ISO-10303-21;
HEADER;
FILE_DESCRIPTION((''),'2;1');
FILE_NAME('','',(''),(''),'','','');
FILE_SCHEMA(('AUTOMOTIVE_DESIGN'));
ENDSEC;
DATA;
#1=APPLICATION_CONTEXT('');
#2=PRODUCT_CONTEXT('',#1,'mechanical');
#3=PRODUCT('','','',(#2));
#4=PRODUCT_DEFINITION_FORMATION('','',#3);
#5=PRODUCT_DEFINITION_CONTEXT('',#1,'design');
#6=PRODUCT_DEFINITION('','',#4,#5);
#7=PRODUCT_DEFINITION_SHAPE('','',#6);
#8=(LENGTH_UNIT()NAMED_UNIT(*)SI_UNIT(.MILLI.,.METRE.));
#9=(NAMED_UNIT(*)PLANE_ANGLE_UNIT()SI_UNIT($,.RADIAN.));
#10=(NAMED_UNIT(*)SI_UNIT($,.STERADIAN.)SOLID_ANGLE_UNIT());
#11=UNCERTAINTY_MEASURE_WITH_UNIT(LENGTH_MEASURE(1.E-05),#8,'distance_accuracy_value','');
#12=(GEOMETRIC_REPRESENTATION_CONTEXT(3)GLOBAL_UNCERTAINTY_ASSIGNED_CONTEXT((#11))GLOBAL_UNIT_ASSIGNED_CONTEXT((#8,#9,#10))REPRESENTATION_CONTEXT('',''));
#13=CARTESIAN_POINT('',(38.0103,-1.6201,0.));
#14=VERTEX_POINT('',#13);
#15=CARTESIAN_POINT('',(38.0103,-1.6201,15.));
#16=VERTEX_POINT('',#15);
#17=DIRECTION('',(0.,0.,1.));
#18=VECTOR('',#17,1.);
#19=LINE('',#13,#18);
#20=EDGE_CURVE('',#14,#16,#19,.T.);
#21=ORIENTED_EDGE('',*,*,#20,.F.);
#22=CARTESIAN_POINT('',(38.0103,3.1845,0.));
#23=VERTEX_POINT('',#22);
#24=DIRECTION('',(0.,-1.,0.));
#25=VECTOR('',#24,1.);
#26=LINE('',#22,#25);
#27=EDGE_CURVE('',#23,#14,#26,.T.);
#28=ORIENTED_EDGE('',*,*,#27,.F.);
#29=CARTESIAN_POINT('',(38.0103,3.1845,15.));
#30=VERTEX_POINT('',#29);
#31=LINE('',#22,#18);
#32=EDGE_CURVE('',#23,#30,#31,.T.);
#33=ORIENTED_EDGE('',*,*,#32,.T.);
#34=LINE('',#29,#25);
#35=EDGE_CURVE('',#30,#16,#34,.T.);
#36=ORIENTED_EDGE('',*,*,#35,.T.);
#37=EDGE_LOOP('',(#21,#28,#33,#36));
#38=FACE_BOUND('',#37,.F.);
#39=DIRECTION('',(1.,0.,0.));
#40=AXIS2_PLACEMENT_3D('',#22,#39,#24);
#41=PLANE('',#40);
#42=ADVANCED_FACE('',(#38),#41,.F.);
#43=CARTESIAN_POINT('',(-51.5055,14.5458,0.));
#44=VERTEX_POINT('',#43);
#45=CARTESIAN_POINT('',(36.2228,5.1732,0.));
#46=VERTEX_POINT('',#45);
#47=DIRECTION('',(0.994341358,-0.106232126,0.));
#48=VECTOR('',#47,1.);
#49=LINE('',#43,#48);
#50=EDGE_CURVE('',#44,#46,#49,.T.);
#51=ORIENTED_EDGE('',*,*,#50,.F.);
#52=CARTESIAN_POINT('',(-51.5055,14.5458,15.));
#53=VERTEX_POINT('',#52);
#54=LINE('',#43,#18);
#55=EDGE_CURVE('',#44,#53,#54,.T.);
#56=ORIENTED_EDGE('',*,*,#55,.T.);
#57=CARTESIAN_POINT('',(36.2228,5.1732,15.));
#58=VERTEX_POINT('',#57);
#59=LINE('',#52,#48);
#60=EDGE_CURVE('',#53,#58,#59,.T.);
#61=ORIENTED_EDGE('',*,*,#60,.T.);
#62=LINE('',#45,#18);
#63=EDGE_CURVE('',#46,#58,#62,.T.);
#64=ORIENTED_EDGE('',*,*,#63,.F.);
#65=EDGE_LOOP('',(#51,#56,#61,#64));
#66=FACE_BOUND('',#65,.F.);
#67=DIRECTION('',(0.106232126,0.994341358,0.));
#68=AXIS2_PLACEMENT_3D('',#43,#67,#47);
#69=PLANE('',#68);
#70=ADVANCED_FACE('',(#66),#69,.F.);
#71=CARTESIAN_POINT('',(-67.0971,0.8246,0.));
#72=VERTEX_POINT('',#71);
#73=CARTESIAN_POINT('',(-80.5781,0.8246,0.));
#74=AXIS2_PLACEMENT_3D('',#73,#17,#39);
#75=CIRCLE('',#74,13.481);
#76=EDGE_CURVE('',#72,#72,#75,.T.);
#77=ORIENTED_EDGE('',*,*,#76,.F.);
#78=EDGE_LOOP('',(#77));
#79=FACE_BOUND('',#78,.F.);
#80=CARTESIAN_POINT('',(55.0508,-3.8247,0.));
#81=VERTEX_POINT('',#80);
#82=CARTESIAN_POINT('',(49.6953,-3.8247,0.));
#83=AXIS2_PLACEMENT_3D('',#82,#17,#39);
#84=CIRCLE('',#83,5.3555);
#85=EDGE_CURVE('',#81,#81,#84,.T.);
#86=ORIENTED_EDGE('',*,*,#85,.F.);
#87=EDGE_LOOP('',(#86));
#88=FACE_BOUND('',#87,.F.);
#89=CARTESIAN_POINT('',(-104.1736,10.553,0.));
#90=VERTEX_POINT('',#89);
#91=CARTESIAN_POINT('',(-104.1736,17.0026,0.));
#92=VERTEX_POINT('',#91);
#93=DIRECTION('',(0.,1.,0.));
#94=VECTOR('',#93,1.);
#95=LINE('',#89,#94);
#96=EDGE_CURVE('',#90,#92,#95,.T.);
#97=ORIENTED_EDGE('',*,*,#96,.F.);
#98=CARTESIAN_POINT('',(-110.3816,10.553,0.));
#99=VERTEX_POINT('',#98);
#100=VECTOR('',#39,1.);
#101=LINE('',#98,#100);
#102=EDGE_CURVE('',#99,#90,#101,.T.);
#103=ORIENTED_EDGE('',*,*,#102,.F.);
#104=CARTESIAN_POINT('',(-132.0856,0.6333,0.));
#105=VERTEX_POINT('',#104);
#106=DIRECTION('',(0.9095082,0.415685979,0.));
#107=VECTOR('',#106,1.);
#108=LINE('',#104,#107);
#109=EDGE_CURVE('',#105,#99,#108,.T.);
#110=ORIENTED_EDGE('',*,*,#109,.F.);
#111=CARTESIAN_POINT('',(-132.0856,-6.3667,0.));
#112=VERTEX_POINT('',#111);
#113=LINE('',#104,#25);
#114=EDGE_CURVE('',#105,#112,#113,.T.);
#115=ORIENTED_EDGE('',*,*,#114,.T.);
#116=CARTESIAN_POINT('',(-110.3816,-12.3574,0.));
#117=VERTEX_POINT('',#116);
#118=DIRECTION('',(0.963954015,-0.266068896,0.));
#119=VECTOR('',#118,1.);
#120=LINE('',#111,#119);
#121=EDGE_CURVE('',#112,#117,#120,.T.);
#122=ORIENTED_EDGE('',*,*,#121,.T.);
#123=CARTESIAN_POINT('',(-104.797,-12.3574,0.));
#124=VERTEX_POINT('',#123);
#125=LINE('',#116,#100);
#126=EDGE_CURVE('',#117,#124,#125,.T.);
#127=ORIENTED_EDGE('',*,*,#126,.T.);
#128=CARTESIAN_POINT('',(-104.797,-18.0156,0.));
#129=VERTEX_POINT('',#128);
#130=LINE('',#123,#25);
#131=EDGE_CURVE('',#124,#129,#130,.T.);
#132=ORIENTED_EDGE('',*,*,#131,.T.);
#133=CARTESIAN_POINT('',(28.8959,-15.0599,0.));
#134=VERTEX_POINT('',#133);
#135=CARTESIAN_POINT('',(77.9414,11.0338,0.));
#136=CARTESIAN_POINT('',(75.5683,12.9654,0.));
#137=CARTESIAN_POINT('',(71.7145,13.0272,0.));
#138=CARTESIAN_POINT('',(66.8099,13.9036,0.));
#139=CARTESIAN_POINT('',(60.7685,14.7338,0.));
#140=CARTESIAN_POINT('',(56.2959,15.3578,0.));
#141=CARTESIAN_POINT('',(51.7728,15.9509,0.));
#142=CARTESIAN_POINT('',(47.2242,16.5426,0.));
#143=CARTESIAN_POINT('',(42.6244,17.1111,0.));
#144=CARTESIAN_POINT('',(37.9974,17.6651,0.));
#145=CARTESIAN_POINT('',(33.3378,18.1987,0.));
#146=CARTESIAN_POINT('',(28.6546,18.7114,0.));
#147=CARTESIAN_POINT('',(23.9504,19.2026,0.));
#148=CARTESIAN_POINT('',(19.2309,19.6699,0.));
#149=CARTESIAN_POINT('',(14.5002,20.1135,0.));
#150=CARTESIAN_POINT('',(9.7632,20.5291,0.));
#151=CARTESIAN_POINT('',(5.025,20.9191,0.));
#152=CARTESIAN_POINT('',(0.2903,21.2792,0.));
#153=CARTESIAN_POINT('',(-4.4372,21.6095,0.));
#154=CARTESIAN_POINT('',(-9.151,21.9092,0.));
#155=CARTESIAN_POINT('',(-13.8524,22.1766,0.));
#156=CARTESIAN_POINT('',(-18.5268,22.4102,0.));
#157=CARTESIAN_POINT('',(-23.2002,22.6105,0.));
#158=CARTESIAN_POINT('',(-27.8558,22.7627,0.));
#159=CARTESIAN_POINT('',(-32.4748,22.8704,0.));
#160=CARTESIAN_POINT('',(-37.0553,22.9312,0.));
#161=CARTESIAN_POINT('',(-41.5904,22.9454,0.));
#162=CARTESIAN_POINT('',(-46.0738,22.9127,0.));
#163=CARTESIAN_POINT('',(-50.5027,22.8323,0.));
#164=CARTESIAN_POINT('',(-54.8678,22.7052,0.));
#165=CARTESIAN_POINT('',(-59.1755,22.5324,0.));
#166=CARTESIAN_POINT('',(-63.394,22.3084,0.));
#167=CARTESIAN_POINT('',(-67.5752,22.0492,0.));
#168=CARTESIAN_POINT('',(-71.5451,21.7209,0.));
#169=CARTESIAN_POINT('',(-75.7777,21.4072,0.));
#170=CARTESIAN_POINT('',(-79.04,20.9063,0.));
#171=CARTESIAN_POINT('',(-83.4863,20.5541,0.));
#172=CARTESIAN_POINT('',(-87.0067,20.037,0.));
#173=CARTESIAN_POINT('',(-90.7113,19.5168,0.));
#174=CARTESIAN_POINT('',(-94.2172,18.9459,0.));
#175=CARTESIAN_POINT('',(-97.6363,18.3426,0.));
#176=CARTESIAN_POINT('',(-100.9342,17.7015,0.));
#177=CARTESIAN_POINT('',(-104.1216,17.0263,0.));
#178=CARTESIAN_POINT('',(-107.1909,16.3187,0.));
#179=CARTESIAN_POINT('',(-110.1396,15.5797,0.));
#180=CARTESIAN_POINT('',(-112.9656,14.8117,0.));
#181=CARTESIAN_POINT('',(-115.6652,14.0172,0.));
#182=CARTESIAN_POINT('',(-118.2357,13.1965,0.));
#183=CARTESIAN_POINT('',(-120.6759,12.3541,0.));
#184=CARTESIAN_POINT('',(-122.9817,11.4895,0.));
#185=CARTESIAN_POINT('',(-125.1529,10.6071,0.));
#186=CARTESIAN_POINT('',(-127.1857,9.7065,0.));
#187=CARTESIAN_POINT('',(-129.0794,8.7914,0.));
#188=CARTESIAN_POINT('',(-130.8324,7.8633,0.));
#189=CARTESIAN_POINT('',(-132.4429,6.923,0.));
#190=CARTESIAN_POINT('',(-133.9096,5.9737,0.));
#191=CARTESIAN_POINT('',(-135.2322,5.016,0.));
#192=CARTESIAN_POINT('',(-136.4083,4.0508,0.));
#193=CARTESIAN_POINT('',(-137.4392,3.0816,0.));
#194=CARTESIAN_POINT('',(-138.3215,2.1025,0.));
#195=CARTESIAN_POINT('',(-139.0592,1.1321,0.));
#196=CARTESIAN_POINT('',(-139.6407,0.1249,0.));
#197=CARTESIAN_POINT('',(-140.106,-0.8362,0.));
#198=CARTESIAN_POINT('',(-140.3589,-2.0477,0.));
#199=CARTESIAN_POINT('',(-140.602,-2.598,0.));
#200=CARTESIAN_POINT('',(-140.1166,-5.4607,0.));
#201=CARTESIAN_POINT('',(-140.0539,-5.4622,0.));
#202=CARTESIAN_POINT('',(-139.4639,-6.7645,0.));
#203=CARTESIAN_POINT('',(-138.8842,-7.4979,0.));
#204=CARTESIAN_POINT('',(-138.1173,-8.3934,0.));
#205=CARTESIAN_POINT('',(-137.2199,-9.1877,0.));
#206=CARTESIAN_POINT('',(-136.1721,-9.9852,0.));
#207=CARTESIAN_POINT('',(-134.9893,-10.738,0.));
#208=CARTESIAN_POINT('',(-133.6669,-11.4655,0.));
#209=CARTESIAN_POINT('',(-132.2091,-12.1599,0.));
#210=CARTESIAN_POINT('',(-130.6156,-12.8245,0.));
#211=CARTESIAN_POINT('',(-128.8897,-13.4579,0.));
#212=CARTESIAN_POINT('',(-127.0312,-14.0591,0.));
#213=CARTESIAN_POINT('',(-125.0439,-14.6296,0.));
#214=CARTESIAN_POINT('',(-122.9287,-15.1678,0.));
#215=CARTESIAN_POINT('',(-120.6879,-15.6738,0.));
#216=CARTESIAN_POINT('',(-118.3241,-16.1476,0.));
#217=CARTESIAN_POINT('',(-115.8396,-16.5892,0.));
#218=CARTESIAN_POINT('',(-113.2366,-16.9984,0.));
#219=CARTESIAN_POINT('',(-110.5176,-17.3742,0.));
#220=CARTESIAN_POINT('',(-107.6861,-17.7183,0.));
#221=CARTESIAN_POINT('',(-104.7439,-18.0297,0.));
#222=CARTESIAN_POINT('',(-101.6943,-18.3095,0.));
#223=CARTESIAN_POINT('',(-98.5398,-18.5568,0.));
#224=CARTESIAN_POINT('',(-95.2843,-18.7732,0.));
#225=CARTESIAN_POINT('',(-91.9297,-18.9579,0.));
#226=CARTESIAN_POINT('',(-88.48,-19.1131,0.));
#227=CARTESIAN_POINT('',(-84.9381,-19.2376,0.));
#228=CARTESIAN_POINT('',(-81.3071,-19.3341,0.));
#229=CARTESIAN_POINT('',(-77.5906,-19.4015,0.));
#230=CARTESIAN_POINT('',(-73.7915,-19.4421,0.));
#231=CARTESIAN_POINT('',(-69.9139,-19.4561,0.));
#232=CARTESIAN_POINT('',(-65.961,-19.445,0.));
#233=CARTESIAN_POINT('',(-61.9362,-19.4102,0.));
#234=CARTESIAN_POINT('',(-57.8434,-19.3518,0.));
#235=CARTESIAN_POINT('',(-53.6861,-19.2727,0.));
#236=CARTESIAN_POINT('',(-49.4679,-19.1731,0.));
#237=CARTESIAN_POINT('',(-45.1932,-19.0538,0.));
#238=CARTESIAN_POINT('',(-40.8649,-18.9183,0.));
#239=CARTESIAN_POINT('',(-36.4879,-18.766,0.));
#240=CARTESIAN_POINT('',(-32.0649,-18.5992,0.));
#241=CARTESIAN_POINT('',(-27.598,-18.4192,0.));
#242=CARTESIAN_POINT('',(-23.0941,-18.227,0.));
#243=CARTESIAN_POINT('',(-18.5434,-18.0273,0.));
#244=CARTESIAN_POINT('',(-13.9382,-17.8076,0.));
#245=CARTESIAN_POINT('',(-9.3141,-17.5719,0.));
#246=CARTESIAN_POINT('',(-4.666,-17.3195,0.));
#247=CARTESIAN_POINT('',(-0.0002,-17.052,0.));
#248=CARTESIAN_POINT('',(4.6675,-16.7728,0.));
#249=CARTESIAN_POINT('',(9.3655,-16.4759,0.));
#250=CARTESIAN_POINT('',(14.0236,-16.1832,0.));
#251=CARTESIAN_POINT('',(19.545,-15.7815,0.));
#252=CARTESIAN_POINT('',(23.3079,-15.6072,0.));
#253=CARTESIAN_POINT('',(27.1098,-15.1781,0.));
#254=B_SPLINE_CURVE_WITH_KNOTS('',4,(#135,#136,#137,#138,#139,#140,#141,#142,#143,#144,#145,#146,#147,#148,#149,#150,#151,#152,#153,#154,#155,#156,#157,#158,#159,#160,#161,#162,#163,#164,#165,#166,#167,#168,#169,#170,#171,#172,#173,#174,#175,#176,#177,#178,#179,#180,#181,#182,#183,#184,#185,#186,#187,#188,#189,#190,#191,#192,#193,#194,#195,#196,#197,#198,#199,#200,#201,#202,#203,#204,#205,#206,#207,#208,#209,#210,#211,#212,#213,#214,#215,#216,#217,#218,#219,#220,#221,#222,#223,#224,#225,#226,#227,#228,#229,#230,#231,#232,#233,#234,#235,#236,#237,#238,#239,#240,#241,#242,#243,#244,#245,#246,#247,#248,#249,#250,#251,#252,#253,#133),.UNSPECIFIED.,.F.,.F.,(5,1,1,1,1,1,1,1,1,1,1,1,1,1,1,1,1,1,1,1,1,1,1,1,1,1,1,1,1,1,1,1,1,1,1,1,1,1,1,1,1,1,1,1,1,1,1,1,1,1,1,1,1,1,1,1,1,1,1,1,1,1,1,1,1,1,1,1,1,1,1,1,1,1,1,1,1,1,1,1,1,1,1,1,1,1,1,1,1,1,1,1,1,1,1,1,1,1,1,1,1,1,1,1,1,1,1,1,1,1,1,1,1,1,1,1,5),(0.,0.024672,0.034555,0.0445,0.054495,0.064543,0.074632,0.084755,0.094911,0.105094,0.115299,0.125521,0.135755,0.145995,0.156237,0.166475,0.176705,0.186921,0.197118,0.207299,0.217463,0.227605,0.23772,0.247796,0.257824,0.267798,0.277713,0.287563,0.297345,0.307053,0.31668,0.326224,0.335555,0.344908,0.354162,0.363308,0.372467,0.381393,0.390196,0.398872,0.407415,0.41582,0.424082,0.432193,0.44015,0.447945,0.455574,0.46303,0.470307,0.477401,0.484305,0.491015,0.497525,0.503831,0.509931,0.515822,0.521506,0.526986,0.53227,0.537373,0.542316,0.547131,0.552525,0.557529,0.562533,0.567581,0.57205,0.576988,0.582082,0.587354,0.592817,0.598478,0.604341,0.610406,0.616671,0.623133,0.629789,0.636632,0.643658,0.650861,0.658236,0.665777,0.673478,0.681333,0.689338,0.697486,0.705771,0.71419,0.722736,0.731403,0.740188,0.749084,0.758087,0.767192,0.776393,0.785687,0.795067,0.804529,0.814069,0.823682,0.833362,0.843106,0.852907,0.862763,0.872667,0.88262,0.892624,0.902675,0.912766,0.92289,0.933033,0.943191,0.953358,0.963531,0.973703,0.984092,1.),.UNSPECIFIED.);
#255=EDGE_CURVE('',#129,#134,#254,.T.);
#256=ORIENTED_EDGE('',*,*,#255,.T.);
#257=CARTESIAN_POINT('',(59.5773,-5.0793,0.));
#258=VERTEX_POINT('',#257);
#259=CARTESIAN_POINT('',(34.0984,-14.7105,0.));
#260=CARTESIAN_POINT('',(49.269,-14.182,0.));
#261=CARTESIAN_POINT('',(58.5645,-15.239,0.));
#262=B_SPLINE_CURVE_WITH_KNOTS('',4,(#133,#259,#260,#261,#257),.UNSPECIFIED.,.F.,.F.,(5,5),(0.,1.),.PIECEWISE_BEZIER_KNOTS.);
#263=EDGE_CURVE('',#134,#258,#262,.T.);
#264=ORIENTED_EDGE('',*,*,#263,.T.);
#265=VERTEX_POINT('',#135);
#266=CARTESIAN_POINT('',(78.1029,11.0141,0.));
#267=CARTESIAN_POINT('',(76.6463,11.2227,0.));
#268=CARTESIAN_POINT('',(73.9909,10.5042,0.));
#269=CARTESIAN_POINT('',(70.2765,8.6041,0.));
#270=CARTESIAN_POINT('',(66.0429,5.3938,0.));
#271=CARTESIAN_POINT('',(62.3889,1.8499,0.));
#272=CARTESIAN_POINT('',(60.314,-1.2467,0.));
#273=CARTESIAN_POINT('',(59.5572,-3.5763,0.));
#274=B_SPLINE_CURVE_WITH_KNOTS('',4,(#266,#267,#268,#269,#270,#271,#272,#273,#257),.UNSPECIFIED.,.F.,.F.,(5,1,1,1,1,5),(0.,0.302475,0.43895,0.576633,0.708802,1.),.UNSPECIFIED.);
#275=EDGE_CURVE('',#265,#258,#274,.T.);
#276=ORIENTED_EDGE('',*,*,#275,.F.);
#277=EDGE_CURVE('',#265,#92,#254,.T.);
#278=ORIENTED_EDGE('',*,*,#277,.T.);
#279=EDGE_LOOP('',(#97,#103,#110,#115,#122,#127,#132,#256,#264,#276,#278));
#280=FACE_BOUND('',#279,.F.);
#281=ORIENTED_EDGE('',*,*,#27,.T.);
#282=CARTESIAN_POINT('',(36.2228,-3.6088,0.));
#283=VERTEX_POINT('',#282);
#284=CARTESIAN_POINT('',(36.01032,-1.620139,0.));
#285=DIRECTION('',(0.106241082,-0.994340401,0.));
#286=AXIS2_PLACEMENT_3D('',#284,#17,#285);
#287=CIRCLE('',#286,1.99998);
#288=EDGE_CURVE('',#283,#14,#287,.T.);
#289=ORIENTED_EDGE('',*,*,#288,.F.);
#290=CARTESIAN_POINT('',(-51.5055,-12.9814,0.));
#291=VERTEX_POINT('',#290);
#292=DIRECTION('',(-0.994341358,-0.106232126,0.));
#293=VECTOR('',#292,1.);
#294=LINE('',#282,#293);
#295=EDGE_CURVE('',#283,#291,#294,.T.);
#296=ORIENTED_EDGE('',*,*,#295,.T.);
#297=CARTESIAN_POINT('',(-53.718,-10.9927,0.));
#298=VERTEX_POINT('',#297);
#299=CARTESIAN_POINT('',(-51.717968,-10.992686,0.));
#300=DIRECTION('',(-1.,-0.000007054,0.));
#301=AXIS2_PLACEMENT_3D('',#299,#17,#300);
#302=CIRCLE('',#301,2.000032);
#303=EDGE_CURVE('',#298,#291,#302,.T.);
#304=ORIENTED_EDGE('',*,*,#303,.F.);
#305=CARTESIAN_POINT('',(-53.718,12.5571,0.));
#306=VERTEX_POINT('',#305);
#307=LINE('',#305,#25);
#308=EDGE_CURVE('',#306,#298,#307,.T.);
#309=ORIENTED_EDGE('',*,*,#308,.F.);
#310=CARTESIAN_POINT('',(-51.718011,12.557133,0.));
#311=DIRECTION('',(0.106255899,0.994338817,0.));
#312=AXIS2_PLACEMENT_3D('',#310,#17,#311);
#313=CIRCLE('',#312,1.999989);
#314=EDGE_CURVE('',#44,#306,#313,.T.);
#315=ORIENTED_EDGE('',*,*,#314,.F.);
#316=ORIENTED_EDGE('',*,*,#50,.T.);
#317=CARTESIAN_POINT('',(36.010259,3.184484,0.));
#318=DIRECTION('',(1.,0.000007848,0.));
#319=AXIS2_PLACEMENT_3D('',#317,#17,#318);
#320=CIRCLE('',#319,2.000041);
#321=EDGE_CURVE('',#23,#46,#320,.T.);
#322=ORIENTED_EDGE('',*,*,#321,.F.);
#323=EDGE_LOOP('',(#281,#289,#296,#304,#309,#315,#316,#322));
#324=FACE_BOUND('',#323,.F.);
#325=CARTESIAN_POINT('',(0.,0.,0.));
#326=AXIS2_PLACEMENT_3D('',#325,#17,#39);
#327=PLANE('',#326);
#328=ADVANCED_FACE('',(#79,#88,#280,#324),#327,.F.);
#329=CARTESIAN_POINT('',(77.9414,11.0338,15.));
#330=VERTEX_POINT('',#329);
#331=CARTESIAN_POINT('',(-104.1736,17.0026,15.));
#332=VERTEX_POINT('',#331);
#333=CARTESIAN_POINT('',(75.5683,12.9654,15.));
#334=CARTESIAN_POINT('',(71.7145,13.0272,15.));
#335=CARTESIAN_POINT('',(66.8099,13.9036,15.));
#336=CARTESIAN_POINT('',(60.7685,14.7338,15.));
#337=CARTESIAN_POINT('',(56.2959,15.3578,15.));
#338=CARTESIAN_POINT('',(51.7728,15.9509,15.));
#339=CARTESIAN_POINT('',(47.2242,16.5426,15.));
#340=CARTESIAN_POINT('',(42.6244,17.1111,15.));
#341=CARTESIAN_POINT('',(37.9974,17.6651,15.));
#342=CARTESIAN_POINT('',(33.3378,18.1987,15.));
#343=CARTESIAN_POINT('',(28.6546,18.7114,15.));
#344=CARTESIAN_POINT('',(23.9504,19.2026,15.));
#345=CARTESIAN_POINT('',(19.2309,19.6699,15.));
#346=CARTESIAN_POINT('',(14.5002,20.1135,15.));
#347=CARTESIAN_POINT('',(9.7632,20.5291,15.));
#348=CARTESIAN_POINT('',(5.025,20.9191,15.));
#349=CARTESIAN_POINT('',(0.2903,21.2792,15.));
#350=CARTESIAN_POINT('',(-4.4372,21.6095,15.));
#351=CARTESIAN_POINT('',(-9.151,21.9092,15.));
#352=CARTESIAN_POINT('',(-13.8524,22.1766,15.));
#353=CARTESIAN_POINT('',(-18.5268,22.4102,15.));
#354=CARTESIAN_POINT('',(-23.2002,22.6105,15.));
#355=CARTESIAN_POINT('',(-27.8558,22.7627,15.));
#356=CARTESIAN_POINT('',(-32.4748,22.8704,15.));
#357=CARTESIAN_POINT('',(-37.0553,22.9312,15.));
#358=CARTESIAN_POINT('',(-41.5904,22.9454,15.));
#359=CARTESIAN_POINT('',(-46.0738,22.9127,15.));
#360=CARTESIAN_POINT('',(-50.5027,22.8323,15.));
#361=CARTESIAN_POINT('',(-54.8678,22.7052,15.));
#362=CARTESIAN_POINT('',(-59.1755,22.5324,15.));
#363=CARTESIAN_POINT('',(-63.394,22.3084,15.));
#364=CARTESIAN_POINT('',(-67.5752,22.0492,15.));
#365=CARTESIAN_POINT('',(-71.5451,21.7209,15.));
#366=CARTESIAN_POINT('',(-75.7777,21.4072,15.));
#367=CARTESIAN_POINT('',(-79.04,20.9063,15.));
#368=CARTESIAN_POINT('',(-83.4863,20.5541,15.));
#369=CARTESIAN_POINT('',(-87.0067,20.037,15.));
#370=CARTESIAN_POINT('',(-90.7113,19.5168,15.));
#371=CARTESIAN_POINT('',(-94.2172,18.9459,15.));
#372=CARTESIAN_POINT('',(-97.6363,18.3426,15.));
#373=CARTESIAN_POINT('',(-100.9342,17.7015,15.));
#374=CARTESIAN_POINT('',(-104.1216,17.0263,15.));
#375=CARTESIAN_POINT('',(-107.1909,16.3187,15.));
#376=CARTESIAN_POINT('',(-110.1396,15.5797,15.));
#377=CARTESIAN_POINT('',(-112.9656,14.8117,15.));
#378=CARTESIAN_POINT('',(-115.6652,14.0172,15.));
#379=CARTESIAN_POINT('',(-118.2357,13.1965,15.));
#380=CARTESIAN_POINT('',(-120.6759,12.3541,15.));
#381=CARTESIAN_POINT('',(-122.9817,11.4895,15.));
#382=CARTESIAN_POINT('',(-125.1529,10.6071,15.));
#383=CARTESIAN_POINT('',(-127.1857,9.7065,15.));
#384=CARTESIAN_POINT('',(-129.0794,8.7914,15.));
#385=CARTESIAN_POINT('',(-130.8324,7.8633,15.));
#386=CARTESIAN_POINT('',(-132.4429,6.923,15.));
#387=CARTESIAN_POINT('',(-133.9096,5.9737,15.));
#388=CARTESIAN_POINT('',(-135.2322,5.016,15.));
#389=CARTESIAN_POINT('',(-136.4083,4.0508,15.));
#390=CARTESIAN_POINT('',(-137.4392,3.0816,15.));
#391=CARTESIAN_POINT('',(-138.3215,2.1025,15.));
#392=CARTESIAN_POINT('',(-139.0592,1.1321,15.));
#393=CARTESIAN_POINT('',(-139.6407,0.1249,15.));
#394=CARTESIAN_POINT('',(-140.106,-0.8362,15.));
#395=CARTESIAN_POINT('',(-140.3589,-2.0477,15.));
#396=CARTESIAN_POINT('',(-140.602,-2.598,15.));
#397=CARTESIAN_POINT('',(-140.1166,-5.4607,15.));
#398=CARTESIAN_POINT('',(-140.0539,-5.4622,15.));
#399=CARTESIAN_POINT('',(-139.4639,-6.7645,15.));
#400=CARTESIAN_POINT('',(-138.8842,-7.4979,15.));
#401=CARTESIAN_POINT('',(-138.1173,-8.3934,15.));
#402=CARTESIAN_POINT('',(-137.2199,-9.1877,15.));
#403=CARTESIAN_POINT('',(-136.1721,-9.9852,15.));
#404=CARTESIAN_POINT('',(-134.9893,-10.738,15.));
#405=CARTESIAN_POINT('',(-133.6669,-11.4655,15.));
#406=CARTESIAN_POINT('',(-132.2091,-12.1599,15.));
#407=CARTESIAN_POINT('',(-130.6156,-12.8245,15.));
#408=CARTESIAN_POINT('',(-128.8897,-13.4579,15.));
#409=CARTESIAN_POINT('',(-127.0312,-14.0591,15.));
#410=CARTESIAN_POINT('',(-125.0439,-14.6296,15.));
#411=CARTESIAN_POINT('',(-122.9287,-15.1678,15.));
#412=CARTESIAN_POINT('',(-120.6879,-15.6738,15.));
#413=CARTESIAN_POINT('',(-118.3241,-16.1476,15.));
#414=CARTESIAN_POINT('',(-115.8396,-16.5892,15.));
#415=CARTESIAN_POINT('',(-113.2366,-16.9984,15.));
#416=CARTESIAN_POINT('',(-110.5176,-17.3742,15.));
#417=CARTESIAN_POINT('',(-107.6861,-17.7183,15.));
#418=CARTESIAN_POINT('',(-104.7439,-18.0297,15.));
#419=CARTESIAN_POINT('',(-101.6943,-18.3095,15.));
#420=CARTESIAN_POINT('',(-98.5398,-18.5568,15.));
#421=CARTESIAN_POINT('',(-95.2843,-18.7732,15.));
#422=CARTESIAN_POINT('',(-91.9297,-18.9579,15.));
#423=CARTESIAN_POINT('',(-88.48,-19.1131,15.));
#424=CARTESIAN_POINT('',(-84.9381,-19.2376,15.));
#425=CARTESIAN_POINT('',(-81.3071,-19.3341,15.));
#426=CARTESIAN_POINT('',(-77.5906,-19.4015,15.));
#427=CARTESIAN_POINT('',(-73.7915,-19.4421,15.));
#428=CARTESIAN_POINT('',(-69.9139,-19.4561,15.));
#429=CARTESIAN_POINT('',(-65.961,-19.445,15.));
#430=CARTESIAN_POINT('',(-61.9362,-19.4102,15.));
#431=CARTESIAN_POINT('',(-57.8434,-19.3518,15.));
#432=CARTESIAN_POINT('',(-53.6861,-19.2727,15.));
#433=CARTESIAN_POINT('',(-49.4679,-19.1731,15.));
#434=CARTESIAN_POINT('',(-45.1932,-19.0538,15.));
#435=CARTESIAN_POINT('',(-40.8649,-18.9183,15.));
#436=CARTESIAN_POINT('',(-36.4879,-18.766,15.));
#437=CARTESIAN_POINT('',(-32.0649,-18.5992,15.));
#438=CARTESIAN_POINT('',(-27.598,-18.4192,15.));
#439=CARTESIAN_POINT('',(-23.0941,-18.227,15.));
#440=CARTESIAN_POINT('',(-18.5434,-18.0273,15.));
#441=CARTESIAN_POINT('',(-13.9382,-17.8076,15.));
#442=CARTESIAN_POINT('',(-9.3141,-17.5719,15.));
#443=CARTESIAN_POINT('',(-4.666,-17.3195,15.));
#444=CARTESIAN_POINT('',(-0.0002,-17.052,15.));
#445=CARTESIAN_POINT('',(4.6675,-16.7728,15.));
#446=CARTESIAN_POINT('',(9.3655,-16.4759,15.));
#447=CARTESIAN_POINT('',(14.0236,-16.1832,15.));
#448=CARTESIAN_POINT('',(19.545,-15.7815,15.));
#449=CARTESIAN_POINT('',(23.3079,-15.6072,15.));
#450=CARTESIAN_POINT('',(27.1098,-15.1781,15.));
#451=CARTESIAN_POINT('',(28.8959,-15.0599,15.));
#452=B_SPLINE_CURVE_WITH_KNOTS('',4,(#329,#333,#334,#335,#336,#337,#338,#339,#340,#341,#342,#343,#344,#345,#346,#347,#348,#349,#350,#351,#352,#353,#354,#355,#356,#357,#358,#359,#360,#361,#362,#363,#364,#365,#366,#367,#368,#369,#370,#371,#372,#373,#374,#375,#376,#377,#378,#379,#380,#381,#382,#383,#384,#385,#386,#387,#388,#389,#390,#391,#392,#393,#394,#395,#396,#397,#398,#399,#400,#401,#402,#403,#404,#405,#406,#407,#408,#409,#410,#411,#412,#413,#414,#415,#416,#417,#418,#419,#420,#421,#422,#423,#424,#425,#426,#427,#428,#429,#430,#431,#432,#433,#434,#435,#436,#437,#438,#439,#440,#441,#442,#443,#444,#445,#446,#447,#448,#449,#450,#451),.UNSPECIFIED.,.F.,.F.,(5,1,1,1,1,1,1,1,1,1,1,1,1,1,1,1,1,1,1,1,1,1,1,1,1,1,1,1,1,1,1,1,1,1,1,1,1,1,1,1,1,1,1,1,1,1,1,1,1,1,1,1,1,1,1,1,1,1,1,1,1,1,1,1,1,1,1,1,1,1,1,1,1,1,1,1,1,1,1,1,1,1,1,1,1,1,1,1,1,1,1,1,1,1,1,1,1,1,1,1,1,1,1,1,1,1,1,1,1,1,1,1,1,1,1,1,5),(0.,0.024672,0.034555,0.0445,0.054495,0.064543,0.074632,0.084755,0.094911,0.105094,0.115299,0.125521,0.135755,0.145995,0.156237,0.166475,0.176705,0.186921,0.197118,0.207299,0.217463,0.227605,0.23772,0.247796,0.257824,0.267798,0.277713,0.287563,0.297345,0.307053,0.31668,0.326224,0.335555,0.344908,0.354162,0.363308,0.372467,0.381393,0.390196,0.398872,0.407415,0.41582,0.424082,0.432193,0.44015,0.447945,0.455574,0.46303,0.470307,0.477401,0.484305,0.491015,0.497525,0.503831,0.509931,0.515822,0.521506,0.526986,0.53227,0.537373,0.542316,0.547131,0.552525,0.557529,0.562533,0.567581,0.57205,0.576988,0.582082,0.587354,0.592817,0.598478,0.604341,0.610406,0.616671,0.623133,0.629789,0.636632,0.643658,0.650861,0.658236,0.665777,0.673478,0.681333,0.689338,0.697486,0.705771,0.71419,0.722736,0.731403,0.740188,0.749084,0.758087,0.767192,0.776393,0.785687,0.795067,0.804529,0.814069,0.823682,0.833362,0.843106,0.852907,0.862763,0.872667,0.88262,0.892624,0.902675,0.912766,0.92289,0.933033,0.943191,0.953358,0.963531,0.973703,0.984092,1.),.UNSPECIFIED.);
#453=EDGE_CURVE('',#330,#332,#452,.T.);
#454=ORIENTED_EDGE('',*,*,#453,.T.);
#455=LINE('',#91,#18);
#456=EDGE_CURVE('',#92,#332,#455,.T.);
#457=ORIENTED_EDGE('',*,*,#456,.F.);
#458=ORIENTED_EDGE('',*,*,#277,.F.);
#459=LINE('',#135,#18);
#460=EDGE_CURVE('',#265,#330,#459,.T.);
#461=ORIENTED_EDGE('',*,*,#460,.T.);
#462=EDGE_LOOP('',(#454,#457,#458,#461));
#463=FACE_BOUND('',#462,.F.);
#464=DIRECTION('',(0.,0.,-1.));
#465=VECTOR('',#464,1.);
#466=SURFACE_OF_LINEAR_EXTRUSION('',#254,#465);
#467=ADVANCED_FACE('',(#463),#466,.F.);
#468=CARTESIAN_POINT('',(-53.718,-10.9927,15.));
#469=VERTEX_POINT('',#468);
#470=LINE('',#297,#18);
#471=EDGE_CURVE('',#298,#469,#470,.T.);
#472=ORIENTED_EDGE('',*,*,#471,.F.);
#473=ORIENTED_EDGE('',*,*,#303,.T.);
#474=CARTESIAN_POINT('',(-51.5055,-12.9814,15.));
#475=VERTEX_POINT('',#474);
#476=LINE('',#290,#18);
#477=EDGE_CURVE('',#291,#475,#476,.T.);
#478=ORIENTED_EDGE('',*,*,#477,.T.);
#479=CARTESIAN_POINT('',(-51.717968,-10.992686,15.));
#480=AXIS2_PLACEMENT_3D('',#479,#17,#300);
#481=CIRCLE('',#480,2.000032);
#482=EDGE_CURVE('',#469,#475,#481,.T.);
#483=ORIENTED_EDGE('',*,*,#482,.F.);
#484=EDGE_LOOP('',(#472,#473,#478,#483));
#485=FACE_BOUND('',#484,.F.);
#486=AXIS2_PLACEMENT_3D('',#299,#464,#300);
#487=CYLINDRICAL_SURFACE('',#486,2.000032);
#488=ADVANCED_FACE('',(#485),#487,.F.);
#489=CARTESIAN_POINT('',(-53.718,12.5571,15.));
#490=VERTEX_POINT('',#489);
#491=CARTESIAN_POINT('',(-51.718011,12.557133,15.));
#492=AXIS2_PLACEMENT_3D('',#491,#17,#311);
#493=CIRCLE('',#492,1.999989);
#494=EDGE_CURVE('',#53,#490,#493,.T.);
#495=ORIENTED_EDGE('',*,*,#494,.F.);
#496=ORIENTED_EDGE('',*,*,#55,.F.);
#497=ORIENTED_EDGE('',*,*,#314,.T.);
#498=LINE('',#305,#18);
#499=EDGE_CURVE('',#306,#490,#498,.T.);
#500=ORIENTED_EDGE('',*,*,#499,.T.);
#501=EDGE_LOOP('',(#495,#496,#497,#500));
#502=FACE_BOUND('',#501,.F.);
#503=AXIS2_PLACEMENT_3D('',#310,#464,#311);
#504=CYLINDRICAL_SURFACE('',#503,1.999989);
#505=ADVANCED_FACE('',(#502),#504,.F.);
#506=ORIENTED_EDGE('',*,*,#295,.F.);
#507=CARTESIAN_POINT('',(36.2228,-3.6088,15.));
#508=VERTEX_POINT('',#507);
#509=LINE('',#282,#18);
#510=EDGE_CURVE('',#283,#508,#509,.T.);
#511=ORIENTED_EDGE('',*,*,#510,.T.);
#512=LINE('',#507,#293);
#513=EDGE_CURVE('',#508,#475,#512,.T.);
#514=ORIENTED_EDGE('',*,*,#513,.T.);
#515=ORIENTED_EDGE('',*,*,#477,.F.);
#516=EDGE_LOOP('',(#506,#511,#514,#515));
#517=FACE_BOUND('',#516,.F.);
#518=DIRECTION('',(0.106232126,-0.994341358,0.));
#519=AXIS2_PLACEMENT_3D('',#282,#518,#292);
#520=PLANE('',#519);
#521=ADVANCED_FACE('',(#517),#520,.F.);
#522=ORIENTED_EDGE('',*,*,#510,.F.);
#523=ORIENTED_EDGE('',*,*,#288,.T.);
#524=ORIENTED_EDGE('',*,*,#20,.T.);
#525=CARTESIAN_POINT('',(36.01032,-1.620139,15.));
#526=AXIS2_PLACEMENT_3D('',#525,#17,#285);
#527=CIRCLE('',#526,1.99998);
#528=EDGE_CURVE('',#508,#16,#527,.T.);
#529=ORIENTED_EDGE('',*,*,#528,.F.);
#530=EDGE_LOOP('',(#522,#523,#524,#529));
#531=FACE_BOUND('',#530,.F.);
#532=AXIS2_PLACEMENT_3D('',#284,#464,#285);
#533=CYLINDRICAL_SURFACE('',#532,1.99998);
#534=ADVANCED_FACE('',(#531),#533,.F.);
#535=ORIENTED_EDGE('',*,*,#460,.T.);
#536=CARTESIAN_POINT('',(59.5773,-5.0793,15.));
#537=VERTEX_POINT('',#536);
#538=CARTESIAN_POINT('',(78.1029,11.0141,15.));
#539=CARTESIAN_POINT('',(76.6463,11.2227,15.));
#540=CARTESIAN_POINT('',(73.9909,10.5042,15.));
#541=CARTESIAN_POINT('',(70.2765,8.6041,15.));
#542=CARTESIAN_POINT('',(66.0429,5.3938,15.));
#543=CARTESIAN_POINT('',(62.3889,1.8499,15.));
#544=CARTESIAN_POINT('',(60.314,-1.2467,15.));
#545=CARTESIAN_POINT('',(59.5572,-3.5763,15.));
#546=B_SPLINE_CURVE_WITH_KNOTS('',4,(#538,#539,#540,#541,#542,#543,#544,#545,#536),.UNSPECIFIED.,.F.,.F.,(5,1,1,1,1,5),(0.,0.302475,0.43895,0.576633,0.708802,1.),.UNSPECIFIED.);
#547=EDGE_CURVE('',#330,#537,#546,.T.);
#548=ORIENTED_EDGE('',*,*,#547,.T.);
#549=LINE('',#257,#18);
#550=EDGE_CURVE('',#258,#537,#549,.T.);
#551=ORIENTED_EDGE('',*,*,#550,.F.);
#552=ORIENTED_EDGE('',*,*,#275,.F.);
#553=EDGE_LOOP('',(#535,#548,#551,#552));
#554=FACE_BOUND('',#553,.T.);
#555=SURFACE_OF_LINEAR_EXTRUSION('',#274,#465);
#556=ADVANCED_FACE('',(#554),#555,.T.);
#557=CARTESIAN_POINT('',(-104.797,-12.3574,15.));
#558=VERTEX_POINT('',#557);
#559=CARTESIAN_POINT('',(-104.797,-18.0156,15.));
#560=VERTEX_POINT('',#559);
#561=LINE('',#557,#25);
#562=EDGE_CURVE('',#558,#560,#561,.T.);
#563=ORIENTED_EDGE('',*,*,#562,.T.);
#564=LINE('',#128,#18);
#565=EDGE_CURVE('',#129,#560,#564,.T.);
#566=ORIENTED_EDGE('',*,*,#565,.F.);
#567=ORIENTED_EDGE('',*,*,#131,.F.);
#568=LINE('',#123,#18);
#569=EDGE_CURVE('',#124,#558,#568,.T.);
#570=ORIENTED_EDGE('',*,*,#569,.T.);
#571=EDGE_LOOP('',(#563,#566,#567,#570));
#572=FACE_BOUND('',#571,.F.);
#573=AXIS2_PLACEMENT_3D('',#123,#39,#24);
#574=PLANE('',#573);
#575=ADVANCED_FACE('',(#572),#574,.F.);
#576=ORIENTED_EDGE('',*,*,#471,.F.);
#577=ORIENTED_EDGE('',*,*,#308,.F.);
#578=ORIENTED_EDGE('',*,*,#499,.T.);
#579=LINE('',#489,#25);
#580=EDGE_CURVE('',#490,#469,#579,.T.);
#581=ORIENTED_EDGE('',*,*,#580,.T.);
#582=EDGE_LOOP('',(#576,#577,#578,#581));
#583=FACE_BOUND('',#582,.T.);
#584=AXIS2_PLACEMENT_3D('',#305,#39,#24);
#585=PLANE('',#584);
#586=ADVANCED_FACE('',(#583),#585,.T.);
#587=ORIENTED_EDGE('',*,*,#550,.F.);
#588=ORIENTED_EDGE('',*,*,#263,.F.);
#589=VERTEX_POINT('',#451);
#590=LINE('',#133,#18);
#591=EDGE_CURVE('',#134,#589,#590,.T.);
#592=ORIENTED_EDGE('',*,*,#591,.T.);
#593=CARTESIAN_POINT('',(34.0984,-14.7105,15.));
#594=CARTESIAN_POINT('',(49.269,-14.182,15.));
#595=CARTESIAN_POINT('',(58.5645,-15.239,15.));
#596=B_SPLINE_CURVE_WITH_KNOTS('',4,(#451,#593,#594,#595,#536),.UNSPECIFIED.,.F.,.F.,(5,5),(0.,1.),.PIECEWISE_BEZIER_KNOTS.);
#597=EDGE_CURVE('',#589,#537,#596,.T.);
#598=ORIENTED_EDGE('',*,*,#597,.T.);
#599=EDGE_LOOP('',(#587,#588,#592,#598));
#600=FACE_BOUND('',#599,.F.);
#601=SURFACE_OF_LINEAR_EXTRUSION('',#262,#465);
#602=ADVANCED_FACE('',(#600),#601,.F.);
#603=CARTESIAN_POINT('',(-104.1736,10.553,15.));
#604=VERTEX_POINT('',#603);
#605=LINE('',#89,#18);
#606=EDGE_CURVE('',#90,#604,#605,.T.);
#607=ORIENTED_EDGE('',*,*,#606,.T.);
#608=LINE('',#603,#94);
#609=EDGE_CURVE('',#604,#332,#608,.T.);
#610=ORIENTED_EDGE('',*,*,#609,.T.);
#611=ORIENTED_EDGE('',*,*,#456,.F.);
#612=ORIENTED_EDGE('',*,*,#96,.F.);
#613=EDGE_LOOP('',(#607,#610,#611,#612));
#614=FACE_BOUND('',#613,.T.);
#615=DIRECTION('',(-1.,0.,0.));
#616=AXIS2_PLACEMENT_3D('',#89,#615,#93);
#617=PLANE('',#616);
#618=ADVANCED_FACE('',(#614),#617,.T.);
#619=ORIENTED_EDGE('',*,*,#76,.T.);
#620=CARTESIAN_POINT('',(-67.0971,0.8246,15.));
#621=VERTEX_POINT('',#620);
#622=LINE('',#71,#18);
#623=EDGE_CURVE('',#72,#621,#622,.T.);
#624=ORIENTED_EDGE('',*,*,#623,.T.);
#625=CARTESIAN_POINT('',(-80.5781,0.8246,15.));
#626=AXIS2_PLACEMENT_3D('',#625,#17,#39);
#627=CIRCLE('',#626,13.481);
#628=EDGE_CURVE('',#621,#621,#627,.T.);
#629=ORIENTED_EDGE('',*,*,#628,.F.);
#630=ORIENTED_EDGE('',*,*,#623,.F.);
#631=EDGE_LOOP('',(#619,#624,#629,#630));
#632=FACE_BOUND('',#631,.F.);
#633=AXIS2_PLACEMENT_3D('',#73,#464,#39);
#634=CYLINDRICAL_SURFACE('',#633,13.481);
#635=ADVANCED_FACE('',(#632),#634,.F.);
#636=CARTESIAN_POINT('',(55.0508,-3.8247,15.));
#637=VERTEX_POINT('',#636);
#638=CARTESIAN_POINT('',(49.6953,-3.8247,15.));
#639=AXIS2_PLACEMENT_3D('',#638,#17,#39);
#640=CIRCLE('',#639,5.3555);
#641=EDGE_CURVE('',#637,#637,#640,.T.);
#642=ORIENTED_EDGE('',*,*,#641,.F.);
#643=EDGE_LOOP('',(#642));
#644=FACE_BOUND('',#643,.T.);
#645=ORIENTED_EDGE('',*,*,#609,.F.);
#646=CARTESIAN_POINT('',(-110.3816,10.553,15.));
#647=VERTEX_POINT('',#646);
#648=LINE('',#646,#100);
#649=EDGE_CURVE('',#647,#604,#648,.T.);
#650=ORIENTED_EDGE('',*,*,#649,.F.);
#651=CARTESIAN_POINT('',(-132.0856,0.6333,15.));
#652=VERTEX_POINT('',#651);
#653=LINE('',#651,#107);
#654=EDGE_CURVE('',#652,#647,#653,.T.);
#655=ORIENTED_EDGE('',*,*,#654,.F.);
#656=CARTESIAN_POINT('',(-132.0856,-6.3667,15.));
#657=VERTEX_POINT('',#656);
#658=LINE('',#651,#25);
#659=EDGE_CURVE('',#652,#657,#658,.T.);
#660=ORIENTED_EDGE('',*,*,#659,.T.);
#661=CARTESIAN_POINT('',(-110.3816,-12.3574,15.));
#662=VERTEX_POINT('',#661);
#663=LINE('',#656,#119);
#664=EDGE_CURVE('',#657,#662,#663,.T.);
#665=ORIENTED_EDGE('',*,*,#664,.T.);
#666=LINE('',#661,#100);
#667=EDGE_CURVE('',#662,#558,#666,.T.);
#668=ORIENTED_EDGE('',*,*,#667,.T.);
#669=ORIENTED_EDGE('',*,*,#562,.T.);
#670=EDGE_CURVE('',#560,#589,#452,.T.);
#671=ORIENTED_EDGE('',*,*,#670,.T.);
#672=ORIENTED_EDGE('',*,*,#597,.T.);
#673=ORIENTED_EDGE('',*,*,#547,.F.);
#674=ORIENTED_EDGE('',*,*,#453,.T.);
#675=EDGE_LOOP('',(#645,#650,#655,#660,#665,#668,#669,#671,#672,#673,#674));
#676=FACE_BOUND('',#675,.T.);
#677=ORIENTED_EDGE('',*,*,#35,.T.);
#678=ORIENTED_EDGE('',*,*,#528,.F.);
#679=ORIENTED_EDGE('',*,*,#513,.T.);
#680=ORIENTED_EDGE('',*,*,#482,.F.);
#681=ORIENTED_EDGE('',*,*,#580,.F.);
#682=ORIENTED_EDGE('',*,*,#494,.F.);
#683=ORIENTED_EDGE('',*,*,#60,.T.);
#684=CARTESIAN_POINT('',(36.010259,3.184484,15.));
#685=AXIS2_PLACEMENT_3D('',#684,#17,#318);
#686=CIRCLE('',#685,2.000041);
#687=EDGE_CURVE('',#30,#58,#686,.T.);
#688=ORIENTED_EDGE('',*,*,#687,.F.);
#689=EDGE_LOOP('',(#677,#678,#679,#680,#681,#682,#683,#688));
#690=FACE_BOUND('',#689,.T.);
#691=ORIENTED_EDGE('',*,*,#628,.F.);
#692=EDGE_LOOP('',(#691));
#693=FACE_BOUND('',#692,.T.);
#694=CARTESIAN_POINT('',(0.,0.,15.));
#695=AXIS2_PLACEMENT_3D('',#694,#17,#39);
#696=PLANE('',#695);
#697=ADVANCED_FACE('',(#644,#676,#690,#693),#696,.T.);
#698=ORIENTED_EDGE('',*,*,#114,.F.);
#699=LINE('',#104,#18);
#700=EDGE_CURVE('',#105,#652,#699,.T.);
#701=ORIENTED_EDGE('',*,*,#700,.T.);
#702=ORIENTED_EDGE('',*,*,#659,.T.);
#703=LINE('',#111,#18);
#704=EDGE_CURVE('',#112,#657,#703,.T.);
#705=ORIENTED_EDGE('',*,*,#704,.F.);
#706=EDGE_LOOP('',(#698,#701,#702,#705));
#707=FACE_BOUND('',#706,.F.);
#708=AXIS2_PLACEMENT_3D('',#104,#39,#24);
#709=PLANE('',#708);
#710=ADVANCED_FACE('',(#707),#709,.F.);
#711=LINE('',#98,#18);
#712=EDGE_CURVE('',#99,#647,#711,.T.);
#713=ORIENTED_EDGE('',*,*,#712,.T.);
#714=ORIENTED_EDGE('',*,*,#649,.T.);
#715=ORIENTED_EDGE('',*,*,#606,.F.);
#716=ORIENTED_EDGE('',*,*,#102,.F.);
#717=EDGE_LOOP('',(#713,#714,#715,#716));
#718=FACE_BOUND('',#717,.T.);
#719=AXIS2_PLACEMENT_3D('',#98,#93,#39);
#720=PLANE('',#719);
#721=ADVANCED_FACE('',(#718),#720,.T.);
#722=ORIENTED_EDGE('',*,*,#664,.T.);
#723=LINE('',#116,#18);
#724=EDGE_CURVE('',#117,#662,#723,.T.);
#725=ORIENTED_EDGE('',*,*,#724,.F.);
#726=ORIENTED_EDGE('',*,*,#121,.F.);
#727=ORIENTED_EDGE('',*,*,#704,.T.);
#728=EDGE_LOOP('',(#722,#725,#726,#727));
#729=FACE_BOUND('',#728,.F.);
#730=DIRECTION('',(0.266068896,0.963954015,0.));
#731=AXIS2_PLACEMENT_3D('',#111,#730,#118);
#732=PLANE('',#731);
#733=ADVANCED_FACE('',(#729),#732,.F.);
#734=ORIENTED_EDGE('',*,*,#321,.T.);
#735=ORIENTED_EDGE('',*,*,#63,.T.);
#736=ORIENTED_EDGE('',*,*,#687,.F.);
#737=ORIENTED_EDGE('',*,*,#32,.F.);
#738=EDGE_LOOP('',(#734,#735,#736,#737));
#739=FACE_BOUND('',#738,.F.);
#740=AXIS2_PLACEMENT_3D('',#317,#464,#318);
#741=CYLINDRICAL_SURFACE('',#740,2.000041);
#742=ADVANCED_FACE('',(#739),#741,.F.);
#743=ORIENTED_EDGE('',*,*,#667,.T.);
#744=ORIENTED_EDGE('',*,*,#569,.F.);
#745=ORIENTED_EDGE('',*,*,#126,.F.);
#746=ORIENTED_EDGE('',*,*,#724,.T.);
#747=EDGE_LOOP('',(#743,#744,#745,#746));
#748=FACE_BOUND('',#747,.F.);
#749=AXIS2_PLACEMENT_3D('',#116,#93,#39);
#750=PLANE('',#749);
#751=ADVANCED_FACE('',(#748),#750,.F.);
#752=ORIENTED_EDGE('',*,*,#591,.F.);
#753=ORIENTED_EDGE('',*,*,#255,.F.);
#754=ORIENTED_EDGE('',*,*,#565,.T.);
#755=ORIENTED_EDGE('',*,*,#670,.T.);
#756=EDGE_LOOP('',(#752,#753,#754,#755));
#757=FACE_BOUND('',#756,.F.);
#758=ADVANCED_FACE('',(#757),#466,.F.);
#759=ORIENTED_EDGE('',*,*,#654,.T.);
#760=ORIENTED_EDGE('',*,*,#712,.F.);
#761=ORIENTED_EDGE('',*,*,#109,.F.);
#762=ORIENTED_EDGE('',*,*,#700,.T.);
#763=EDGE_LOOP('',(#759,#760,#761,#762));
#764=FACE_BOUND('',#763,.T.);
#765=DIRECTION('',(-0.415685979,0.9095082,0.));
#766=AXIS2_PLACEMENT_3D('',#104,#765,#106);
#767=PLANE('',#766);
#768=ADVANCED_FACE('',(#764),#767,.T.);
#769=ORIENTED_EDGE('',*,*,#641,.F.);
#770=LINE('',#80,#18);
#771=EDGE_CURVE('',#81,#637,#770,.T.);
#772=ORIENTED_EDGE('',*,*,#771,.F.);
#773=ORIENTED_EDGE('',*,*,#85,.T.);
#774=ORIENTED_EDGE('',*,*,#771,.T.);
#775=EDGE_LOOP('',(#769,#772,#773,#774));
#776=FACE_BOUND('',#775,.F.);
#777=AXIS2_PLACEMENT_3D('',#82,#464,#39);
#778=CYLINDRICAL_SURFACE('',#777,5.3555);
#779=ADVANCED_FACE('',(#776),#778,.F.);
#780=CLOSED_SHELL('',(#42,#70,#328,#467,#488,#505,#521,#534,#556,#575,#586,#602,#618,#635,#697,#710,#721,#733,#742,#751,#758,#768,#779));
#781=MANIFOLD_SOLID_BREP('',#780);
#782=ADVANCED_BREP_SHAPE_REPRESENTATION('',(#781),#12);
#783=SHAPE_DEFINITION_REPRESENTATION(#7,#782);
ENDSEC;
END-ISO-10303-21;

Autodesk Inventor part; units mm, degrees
ref_plane "YZ Plane" through (0, 0, 0) normal (1, 0, 0) x (0, 1, 0)
ref_plane "XZ Plane" through (0, 0, 0) normal (0, 1, 0) x (-1, 0, 0)
ref_plane "XY Plane" through (0, 0, 0) normal (0, 0, 1) x (1, 0, 0)
sketch "Sketch3" plane through (0, 0, 0) normal (0, 0, 1) x (1, 0, 0)
  line L0 (-80.5781, 0.8246) -> (-80.5781, 20.7988) construction
  circle A0 centre (-80.5781, 0.8246) radius 13.481
  line L1 (-53.718, 12.5571) -> (-53.718, -10.9927)
  arc A1 (-53.718, -10.9927) -> (-51.5055, -12.9814) centre (-51.718, -10.9927) ccw
  arc A2 (-51.5055, 14.5458) -> (-53.718, 12.5571) centre (-51.718, 12.5571) ccw
  line L2 (36.2228, -3.6088) -> (-51.5055, -12.9814)
  line L3 (38.0103, 3.1845) -> (38.0103, -1.6201)
  line L4 (-80.5781, 0.8246) -> (49.5525, 0.8246) construction
  circle A3 centre (49.6953, -3.8247) radius 5.3555
  line L5 (59.6953, 14.884) -> (59.6953, -12.7998) construction
  spline S0 degree 4 poles (77.9414, 11.0338) (75.5683, 12.9654) (71.7145, 13.0272) (66.8099, 13.9036) (60.7685, 14.7338) (56.2959, 15.3578) (51.7728, 15.9509) (47.2242, 16.5426) (42.6244, 17.1111) (37.9974, 17.6651) (33.3378, 18.1987) (28.6546, 18.7114) (23.9504, 19.2026) (19.2309, 19.6699) (14.5002, 20.1135) (9.7632, 20.5291) (5.025, 20.9191) (0.2903, 21.2792) (-4.4372, 21.6095) (-9.151, 21.9092) (-13.8524, 22.1766) (-18.5268, 22.4102) (-23.2002, 22.6105) (-27.8558, 22.7627) (-32.4748, 22.8704) (-37.0553, 22.9312) (-41.5904, 22.9454) (-46.0738, 22.9127) (-50.5027, 22.8323) (-54.8678, 22.7052) (-59.1755, 22.5324) (-63.394, 22.3084) (-67.5752, 22.0492) (-71.5451, 21.7209) (-75.7777, 21.4072) (-79.04, 20.9063) (-83.4863, 20.5541) (-87.0067, 20.037) (-90.7113, 19.5168) (-94.2172, 18.9459) (-97.6363, 18.3426) (-100.9342, 17.7015) (-104.1216, 17.0263) (-107.1909, 16.3187) (-110.1396, 15.5797) (-112.9656, 14.8117) (-115.6652, 14.0172) (-118.2357, 13.1965) (-120.6759, 12.3541) (-122.9817, 11.4895) (-125.1529, 10.6071) (-127.1857, 9.7065) (-129.0794, 8.7914) (-130.8324, 7.8633) (-132.4429, 6.923) (-133.9096, 5.9737) (-135.2322, 5.016) (-136.4083, 4.0508) (-137.4392, 3.0816) (-138.3215, 2.1025) (-139.0592, 1.1321) (-139.6407, 0.1249) (-140.106, -0.8362) (-140.3589, -2.0477) (-140.602, -2.598) (-140.1166, -5.4607) (-140.0539, -5.4622) (-139.4639, -6.7645) (-138.8842, -7.4979) (-138.1173, -8.3934) (-137.2199, -9.1877) (-136.1721, -9.9852) (-134.9893, -10.738) (-133.6669, -11.4655) (-132.2091, -12.1599) (-130.6156, -12.8245) (-128.8897, -13.4579) (-127.0312, -14.0591) (-125.0439, -14.6296) (-122.9287, -15.1678) (-120.6879, -15.6738) (-118.3241, -16.1476) (-115.8396, -16.5892) (-113.2366, -16.9984) (-110.5176, -17.3742) (-107.6861, -17.7183) (-104.7439, -18.0297) (-101.6943, -18.3095) (-98.5398, -18.5568) (-95.2843, -18.7732) (-91.9297, -18.9579) (-88.48, -19.1131) (-84.9381, -19.2376) (-81.3071, -19.3341) (-77.5906, -19.4015) (-73.7915, -19.4421) (-69.9139, -19.4561) (-65.961, -19.445) (-61.9362, -19.4102) (-57.8434, -19.3518) (-53.6861, -19.2727) (-49.4679, -19.1731) (-45.1932, -19.0538) (-40.8649, -18.9183) (-36.4879, -18.766) (-32.0649, -18.5992) (-27.598, -18.4192) (-23.0941, -18.227) (-18.5434, -18.0273) (-13.9382, -17.8076) (-9.3141, -17.5719) (-4.666, -17.3195) (-0.0002, -17.052) (4.6675, -16.7728) (9.3655, -16.4759) (14.0236, -16.1832) (19.545, -15.7815) (23.3079, -15.6072) (27.1098, -15.1781) (28.8959, -15.0599) knots 0 0 0 0 0 0.024672 0.034555 0.0445 0.054495 0.064543 0.074632 0.084755 0.094911 0.105094 0.115299 0.125521 0.135755 0.145995 0.156237 0.166475 0.176705 0.186921 0.197118 0.207299 0.217463 0.227605 0.23772 0.247796 0.257824 0.267798 0.277713 0.287563 0.297345 0.307053 0.31668 0.326224 0.335555 0.344908 0.354162 0.363308 0.372467 0.381393 0.390196 0.398872 0.407415 0.41582 0.424082 0.432193 0.44015 0.447945 0.455574 0.46303 0.470307 0.477401 0.484305 0.491015 0.497525 0.503831 0.509931 0.515822 0.521506 0.526986 0.53227 0.537373 0.542316 0.547131 0.552525 0.557529 0.562533 0.567581 0.57205 0.576988 0.582082 0.587354 0.592817 0.598478 0.604341 0.610406 0.616671 0.623133 0.629789 0.636632 0.643658 0.650861 0.658236 0.665777 0.673478 0.681333 0.689338 0.697486 0.705771 0.71419 0.722736 0.731403 0.740188 0.749084 0.758087 0.767192 0.776393 0.785687 0.795067 0.804529 0.814069 0.823682 0.833362 0.843106 0.852907 0.862763 0.872667 0.88262 0.892624 0.902675 0.912766 0.92289 0.933033 0.943191 0.953358 0.963531 0.973703 0.984092 1 1 1 1 1
  line L6 (7.5013, -16.4763) -> (50.2906, -13.6435) construction
  arc A4 (44.8353, -17.2546) -> (13.385, -19.3367) centre (31.5327, -54.8885) ccw construction
  line L7 (159.6953, -3.8066) -> (59.6953, -3.8066) construction
  line L8 (-51.5055, 14.5458) -> (36.2228, 5.1732)
  arc A5 (36.2228, -3.6088) -> (38.0103, -1.6201) centre (36.0103, -1.6201) ccw
  arc A6 (38.0103, 3.1845) -> (36.2228, 5.1732) centre (36.0103, 3.1845) ccw
  spline S1 degree 4 poles (78.1029, 11.0141) (76.6463, 11.2227) (73.9909, 10.5042) (70.2765, 8.6041) (66.0429, 5.3938) (62.3889, 1.8499) (60.314, -1.2467) (59.5572, -3.5763) (59.5773, -5.0793) knots 0 0 0 0 0 0.302475 0.43895 0.576633 0.708802 1 1 1 1 1
  spline S2 degree 4 poles (28.8959, -15.0599) (34.0984, -14.7105) (49.269, -14.182) (58.5645, -15.239) (59.5773, -5.0793) knots 0 0 0 0 0 1 1 1 1 1
  line L9 (28.8959, -15.0599) -> (34.0984, -14.7105) construction
  line L10 (34.0984, -14.7105) -> (49.269, -14.182) construction
  line L11 (49.269, -14.182) -> (58.5645, -15.239) construction
  line L12 (58.5645, -15.239) -> (59.5773, -5.0793) construction
  line L13 (-140.4646, -2.8394) -> (159.4818, -3.8173) construction
  line L14 (-132.0856, 0.6333) -> (-132.0856, -6.3667)
  line L15 (-132.0856, -6.3667) -> (-110.3816, -12.3574)
  line L16 (-110.3816, -12.3574) -> (-104.797, -12.3574)
  line L17 (-104.797, -12.3574) -> (-104.797, -18.0156)
  line L18 (-132.0856, 0.6333) -> (-110.3816, 10.553)
  line L19 (-110.3816, 10.553) -> (-104.1736, 10.553)
  line L20 (-104.1736, 10.553) -> (-104.1736, 17.0026)
  point P0 (0, 0)
  point P1 (17.6589, 23.5628)
  point P2 (75.883, 10.8572)
  point P3 (72.8647, 9.7686)
  point P4 (69.4179, 7.8149)
  point P5 (66.0452, 5.2617)
  point P6 (63.1887, 2.4463)
  point P7 (61.1228, -0.3317)
  point P8 (59.9357, -2.8689)
  point P9 (-160.0931, -3.8671)
  point P10 (28.8959, -15.0599)
  point P11 (69.5533, 13.4647)
  point P12 (65.1899, 14.1023)
  point P13 (60.7936, 14.7318)
  point P14 (56.3207, 15.3468)
  point P15 (51.7945, 15.947)
  point P16 (47.2398, 16.5346)
  point P17 (42.6414, 17.1053)
  point P18 (38.0104, 17.6585)
  point P19 (33.3491, 18.1925)
  point P20 (28.6632, 18.7055)
  point P21 (23.9568, 19.1966)
  point P22 (19.2348, 19.6643)
  point P23 (14.5017, 20.1074)
  point P24 (9.7623, 20.5238)
  point P25 (5.0217, 20.9132)
  point P26 (0.2844, 21.2735)
  point P27 (-4.4451, 21.6038)
  point P28 (-9.1614, 21.9032)
  point P29 (-13.86, 22.1702)
  point P30 (-18.5361, 22.4036)
  point P31 (-23.211, 22.601)
  point P32 (-27.8721, 22.754)
  point P33 (-32.4966, 22.8611)
  point P34 (-37.0797, 22.9217)
  point P35 (-41.6169, 22.9356)
  point P36 (-46.1028, 22.9023)
  point P37 (-50.5329, 22.8216)
  point P38 (-54.9021, 22.6941)
  point P39 (-59.2065, 22.5195)
  point P40 (-63.4406, 22.2977)
  point P41 (-67.6008, 22.0302)
  point P42 (-71.6806, 21.7165)
  point P43 (-75.6814, 21.3591)
  point P44 (-79.1834, 20.9458)
  point P45 (-83.4048, 20.5095)
  point P46 (-87.1309, 20.023)
  point P47 (-90.7527, 19.494)
  point P48 (-94.2725, 18.9266)
  point P49 (-97.6845, 18.3211)
  point P50 (-100.9861, 17.6791)
  point P51 (-107.2438, 16.2934)
  point P52 (-110.1931, 15.553)
  point P53 (-113.0194, 14.7835)
  point P54 (-115.7191, 13.987)
  point P55 (-118.2898, 13.165)
  point P56 (-120.7294, 12.3201)
  point P57 (-123.0349, 11.454)
  point P58 (-125.2048, 10.569)
  point P59 (-127.2364, 9.6666)
  point P60 (-129.1282, 8.7491)
  point P61 (-130.8786, 7.8185)
  point P62 (-132.486, 6.8762)
  point P63 (-133.9488, 5.9245)
  point P64 (-135.2661, 4.9648)
  point P65 (-136.4363, 3.9987)
  point P66 (-137.4592, 3.0275)
  point P67 (-138.3336, 2.0531)
  point P68 (-139.0591, 1.0763)
  point P69 (-139.6352, 0.0983)
  point P70 (-140.0613, -0.8802)
  point P71 (-140.338, -1.8576)
  point P72 (-140.1239, -5.2398)
  point P73 (-139.9547, -5.7022)
  point P74 (-139.492, -6.6066)
  point P75 (-138.8844, -7.4823)
  point P76 (-138.1328, -8.3292)
  point P77 (-137.2384, -9.147)
  point P78 (-136.202, -9.9355)
  point P79 (-135.0249, -10.6943)
  point P80 (-133.7085, -11.4228)
  point P81 (-132.2548, -12.1206)
  point P82 (-130.6648, -12.7879)
  point P83 (-128.941, -13.4239)
  point P84 (-127.0846, -14.0282)
  point P85 (-125.0983, -14.6009)
  point P86 (-122.9839, -15.1415)
  point P87 (-120.7435, -15.6497)
  point P88 (-118.3798, -16.1256)
  point P89 (-115.8952, -16.569)
  point P90 (-113.2918, -16.9797)
  point P91 (-110.5723, -17.3574)
  point P92 (-107.74, -17.7027)
  point P93 (-101.7463, -18.2964)
  point P94 (-98.5909, -18.5451)
  point P95 (-95.3341, -18.7623)
  point P96 (-91.9783, -18.9484)
  point P97 (-88.5271, -19.1041)
  point P98 (-84.9838, -19.2298)
  point P99 (-81.3514, -19.3267)
  point P100 (-77.6332, -19.3951)
  point P101 (-73.8324, -19.4362)
  point P102 (-69.9531, -19.4509)
  point P103 (-65.9985, -19.4404)
  point P104 (-61.9719, -19.4059)
  point P105 (-57.8772, -19.3483)
  point P106 (-53.718, -19.2694)
  point P107 (-49.4979, -19.1701)
  point P108 (-45.2211, -19.0516)
  point P109 (-40.8909, -18.916)
  point P110 (-36.5118, -18.7642)
  point P111 (-32.0871, -18.5977)
  point P112 (-27.6213, -18.418)
  point P113 (-23.1183, -18.2269)
  point P114 (-18.5646, -18.0247)
  point P115 (-13.9566, -17.8054)
  point P116 (-9.3252, -17.5693)
  point P117 (-4.674, -17.317)
  point P118 (-0.0078, -17.05)
  point P119 (4.6686, -16.7695)
  point P120 (9.3513, -16.477)
  point P121 (14.0352, -16.1731)
  point P122 (18.7161, -15.8596)
  point P123 (23.3889, -15.5371)
  point P124 (78.0825, 12.164)
  point P125 (159.2574, -3.8401)
  point P126 (158.8836, -3.8779)
  point P127 (158.3607, -3.9307)
  point P128 (157.6896, -3.9985)
  point P129 (156.8706, -4.081)
  point P130 (155.9046, -4.1779)
  point P131 (154.7931, -4.2892)
  point P132 (153.5367, -4.4143)
  point P133 (152.1372, -4.5532)
  point P134 (150.5955, -4.7056)
  point P135 (148.914, -4.8712)
  point P136 (147.0936, -5.0494)
  point P137 (145.137, -5.2399)
  point P138 (143.0457, -5.4421)
  point P139 (140.8221, -5.6563)
  point P140 (138.4686, -5.8813)
  point P141 (135.9876, -6.1174)
  point P142 (133.3815, -6.3634)
  point P143 (130.6533, -6.6196)
  point P144 (127.8054, -6.8851)
  point P145 (124.8414, -7.1596)
  point P146 (121.7634, -7.4428)
  point P147 (118.5756, -7.7341)
  point P148 (115.2804, -8.0332)
  point P149 (111.8817, -8.3395)
  point P150 (108.3828, -8.6527)
  point P151 (104.787, -8.9722)
  point P152 (101.0985, -9.2974)
  point P153 (97.3206, -9.6283)
  point P154 (93.4572, -9.9643)
  point P155 (89.5122, -10.3048)
  point P156 (85.4898, -10.6492)
  point P157 (81.3936, -10.9969)
  point P158 (77.2284, -11.3479)
  point P159 (72.9975, -11.701)
  point P160 (68.7057, -12.0556)
  point P161 (64.3572, -12.4117)
  point P162 (59.9559, -12.7678)
  point P163 (55.5069, -13.1239)
  point P164 (51.0138, -13.4788)
  point P165 (46.4817, -13.8316)
  point P166 (41.9148, -14.182)
  point P167 (35.7035, -14.3277)
  point P168 (32.6946, -14.8708)
  point P169 (82.2459, 11.5043)
  point P170 (86.3364, 10.8401)
  point P171 (90.3495, 10.1732)
  point P172 (94.2816, 9.5051)
  point P173 (98.1288, 8.837)
  point P174 (101.8872, 8.171)
  point P175 (105.5538, 7.5086)
  point P176 (109.1244, 6.8507)
  point P177 (112.596, 6.1997)
  point P178 (115.9653, 5.5565)
  point P179 (119.2287, 4.9229)
  point P180 (122.3835, 4.3007)
  point P181 (125.4264, 3.6911)
  point P182 (128.3547, 3.0956)
  point P183 (131.1654, 2.5157)
  point P184 (133.8561, 1.9532)
  point P185 (136.4244, 1.4093)
  point P186 (138.8676, 0.8855)
  point P187 (141.1833, 0.383)
  point P188 (143.3697, -0.0964)
  point P189 (145.4247, -0.5518)
  point P190 (147.3462, -0.9817)
  point P191 (149.1327, -1.3852)
  point P192 (150.7821, -1.7608)
  point P193 (152.2935, -2.1073)
  point P194 (153.6651, -2.4241)
  point P195 (154.8954, -2.7103)
  point P196 (155.9838, -2.9647)
  point P197 (156.9291, -3.187)
  point P198 (157.7307, -3.376)
  point P199 (158.3871, -3.5317)
  dimension "d3" = 26.962
  dimension "d6" = 10.711
  dimension "d7" = 110
  dimension "d8" = 100
  dimension "d9" = 2
  dimension "d11" = 4.6493
  dimension "d25" = 7
  dimension "d26" = 3.5
  dimension "d27" = 8.379
  dimension "d28" = 30.083
  dimension "d29" = 5
  dimension "d30" = 5
  dimension "d31" = 59.8865
extrude "Extrusion2" add sketch "Sketch3" along normal blind 15 contours S1 S2 S0 L17 L16 L15 L14 L18 L19 L20
properties part number "3P.03.10.02.JS.rib 10 foam_CPY"
